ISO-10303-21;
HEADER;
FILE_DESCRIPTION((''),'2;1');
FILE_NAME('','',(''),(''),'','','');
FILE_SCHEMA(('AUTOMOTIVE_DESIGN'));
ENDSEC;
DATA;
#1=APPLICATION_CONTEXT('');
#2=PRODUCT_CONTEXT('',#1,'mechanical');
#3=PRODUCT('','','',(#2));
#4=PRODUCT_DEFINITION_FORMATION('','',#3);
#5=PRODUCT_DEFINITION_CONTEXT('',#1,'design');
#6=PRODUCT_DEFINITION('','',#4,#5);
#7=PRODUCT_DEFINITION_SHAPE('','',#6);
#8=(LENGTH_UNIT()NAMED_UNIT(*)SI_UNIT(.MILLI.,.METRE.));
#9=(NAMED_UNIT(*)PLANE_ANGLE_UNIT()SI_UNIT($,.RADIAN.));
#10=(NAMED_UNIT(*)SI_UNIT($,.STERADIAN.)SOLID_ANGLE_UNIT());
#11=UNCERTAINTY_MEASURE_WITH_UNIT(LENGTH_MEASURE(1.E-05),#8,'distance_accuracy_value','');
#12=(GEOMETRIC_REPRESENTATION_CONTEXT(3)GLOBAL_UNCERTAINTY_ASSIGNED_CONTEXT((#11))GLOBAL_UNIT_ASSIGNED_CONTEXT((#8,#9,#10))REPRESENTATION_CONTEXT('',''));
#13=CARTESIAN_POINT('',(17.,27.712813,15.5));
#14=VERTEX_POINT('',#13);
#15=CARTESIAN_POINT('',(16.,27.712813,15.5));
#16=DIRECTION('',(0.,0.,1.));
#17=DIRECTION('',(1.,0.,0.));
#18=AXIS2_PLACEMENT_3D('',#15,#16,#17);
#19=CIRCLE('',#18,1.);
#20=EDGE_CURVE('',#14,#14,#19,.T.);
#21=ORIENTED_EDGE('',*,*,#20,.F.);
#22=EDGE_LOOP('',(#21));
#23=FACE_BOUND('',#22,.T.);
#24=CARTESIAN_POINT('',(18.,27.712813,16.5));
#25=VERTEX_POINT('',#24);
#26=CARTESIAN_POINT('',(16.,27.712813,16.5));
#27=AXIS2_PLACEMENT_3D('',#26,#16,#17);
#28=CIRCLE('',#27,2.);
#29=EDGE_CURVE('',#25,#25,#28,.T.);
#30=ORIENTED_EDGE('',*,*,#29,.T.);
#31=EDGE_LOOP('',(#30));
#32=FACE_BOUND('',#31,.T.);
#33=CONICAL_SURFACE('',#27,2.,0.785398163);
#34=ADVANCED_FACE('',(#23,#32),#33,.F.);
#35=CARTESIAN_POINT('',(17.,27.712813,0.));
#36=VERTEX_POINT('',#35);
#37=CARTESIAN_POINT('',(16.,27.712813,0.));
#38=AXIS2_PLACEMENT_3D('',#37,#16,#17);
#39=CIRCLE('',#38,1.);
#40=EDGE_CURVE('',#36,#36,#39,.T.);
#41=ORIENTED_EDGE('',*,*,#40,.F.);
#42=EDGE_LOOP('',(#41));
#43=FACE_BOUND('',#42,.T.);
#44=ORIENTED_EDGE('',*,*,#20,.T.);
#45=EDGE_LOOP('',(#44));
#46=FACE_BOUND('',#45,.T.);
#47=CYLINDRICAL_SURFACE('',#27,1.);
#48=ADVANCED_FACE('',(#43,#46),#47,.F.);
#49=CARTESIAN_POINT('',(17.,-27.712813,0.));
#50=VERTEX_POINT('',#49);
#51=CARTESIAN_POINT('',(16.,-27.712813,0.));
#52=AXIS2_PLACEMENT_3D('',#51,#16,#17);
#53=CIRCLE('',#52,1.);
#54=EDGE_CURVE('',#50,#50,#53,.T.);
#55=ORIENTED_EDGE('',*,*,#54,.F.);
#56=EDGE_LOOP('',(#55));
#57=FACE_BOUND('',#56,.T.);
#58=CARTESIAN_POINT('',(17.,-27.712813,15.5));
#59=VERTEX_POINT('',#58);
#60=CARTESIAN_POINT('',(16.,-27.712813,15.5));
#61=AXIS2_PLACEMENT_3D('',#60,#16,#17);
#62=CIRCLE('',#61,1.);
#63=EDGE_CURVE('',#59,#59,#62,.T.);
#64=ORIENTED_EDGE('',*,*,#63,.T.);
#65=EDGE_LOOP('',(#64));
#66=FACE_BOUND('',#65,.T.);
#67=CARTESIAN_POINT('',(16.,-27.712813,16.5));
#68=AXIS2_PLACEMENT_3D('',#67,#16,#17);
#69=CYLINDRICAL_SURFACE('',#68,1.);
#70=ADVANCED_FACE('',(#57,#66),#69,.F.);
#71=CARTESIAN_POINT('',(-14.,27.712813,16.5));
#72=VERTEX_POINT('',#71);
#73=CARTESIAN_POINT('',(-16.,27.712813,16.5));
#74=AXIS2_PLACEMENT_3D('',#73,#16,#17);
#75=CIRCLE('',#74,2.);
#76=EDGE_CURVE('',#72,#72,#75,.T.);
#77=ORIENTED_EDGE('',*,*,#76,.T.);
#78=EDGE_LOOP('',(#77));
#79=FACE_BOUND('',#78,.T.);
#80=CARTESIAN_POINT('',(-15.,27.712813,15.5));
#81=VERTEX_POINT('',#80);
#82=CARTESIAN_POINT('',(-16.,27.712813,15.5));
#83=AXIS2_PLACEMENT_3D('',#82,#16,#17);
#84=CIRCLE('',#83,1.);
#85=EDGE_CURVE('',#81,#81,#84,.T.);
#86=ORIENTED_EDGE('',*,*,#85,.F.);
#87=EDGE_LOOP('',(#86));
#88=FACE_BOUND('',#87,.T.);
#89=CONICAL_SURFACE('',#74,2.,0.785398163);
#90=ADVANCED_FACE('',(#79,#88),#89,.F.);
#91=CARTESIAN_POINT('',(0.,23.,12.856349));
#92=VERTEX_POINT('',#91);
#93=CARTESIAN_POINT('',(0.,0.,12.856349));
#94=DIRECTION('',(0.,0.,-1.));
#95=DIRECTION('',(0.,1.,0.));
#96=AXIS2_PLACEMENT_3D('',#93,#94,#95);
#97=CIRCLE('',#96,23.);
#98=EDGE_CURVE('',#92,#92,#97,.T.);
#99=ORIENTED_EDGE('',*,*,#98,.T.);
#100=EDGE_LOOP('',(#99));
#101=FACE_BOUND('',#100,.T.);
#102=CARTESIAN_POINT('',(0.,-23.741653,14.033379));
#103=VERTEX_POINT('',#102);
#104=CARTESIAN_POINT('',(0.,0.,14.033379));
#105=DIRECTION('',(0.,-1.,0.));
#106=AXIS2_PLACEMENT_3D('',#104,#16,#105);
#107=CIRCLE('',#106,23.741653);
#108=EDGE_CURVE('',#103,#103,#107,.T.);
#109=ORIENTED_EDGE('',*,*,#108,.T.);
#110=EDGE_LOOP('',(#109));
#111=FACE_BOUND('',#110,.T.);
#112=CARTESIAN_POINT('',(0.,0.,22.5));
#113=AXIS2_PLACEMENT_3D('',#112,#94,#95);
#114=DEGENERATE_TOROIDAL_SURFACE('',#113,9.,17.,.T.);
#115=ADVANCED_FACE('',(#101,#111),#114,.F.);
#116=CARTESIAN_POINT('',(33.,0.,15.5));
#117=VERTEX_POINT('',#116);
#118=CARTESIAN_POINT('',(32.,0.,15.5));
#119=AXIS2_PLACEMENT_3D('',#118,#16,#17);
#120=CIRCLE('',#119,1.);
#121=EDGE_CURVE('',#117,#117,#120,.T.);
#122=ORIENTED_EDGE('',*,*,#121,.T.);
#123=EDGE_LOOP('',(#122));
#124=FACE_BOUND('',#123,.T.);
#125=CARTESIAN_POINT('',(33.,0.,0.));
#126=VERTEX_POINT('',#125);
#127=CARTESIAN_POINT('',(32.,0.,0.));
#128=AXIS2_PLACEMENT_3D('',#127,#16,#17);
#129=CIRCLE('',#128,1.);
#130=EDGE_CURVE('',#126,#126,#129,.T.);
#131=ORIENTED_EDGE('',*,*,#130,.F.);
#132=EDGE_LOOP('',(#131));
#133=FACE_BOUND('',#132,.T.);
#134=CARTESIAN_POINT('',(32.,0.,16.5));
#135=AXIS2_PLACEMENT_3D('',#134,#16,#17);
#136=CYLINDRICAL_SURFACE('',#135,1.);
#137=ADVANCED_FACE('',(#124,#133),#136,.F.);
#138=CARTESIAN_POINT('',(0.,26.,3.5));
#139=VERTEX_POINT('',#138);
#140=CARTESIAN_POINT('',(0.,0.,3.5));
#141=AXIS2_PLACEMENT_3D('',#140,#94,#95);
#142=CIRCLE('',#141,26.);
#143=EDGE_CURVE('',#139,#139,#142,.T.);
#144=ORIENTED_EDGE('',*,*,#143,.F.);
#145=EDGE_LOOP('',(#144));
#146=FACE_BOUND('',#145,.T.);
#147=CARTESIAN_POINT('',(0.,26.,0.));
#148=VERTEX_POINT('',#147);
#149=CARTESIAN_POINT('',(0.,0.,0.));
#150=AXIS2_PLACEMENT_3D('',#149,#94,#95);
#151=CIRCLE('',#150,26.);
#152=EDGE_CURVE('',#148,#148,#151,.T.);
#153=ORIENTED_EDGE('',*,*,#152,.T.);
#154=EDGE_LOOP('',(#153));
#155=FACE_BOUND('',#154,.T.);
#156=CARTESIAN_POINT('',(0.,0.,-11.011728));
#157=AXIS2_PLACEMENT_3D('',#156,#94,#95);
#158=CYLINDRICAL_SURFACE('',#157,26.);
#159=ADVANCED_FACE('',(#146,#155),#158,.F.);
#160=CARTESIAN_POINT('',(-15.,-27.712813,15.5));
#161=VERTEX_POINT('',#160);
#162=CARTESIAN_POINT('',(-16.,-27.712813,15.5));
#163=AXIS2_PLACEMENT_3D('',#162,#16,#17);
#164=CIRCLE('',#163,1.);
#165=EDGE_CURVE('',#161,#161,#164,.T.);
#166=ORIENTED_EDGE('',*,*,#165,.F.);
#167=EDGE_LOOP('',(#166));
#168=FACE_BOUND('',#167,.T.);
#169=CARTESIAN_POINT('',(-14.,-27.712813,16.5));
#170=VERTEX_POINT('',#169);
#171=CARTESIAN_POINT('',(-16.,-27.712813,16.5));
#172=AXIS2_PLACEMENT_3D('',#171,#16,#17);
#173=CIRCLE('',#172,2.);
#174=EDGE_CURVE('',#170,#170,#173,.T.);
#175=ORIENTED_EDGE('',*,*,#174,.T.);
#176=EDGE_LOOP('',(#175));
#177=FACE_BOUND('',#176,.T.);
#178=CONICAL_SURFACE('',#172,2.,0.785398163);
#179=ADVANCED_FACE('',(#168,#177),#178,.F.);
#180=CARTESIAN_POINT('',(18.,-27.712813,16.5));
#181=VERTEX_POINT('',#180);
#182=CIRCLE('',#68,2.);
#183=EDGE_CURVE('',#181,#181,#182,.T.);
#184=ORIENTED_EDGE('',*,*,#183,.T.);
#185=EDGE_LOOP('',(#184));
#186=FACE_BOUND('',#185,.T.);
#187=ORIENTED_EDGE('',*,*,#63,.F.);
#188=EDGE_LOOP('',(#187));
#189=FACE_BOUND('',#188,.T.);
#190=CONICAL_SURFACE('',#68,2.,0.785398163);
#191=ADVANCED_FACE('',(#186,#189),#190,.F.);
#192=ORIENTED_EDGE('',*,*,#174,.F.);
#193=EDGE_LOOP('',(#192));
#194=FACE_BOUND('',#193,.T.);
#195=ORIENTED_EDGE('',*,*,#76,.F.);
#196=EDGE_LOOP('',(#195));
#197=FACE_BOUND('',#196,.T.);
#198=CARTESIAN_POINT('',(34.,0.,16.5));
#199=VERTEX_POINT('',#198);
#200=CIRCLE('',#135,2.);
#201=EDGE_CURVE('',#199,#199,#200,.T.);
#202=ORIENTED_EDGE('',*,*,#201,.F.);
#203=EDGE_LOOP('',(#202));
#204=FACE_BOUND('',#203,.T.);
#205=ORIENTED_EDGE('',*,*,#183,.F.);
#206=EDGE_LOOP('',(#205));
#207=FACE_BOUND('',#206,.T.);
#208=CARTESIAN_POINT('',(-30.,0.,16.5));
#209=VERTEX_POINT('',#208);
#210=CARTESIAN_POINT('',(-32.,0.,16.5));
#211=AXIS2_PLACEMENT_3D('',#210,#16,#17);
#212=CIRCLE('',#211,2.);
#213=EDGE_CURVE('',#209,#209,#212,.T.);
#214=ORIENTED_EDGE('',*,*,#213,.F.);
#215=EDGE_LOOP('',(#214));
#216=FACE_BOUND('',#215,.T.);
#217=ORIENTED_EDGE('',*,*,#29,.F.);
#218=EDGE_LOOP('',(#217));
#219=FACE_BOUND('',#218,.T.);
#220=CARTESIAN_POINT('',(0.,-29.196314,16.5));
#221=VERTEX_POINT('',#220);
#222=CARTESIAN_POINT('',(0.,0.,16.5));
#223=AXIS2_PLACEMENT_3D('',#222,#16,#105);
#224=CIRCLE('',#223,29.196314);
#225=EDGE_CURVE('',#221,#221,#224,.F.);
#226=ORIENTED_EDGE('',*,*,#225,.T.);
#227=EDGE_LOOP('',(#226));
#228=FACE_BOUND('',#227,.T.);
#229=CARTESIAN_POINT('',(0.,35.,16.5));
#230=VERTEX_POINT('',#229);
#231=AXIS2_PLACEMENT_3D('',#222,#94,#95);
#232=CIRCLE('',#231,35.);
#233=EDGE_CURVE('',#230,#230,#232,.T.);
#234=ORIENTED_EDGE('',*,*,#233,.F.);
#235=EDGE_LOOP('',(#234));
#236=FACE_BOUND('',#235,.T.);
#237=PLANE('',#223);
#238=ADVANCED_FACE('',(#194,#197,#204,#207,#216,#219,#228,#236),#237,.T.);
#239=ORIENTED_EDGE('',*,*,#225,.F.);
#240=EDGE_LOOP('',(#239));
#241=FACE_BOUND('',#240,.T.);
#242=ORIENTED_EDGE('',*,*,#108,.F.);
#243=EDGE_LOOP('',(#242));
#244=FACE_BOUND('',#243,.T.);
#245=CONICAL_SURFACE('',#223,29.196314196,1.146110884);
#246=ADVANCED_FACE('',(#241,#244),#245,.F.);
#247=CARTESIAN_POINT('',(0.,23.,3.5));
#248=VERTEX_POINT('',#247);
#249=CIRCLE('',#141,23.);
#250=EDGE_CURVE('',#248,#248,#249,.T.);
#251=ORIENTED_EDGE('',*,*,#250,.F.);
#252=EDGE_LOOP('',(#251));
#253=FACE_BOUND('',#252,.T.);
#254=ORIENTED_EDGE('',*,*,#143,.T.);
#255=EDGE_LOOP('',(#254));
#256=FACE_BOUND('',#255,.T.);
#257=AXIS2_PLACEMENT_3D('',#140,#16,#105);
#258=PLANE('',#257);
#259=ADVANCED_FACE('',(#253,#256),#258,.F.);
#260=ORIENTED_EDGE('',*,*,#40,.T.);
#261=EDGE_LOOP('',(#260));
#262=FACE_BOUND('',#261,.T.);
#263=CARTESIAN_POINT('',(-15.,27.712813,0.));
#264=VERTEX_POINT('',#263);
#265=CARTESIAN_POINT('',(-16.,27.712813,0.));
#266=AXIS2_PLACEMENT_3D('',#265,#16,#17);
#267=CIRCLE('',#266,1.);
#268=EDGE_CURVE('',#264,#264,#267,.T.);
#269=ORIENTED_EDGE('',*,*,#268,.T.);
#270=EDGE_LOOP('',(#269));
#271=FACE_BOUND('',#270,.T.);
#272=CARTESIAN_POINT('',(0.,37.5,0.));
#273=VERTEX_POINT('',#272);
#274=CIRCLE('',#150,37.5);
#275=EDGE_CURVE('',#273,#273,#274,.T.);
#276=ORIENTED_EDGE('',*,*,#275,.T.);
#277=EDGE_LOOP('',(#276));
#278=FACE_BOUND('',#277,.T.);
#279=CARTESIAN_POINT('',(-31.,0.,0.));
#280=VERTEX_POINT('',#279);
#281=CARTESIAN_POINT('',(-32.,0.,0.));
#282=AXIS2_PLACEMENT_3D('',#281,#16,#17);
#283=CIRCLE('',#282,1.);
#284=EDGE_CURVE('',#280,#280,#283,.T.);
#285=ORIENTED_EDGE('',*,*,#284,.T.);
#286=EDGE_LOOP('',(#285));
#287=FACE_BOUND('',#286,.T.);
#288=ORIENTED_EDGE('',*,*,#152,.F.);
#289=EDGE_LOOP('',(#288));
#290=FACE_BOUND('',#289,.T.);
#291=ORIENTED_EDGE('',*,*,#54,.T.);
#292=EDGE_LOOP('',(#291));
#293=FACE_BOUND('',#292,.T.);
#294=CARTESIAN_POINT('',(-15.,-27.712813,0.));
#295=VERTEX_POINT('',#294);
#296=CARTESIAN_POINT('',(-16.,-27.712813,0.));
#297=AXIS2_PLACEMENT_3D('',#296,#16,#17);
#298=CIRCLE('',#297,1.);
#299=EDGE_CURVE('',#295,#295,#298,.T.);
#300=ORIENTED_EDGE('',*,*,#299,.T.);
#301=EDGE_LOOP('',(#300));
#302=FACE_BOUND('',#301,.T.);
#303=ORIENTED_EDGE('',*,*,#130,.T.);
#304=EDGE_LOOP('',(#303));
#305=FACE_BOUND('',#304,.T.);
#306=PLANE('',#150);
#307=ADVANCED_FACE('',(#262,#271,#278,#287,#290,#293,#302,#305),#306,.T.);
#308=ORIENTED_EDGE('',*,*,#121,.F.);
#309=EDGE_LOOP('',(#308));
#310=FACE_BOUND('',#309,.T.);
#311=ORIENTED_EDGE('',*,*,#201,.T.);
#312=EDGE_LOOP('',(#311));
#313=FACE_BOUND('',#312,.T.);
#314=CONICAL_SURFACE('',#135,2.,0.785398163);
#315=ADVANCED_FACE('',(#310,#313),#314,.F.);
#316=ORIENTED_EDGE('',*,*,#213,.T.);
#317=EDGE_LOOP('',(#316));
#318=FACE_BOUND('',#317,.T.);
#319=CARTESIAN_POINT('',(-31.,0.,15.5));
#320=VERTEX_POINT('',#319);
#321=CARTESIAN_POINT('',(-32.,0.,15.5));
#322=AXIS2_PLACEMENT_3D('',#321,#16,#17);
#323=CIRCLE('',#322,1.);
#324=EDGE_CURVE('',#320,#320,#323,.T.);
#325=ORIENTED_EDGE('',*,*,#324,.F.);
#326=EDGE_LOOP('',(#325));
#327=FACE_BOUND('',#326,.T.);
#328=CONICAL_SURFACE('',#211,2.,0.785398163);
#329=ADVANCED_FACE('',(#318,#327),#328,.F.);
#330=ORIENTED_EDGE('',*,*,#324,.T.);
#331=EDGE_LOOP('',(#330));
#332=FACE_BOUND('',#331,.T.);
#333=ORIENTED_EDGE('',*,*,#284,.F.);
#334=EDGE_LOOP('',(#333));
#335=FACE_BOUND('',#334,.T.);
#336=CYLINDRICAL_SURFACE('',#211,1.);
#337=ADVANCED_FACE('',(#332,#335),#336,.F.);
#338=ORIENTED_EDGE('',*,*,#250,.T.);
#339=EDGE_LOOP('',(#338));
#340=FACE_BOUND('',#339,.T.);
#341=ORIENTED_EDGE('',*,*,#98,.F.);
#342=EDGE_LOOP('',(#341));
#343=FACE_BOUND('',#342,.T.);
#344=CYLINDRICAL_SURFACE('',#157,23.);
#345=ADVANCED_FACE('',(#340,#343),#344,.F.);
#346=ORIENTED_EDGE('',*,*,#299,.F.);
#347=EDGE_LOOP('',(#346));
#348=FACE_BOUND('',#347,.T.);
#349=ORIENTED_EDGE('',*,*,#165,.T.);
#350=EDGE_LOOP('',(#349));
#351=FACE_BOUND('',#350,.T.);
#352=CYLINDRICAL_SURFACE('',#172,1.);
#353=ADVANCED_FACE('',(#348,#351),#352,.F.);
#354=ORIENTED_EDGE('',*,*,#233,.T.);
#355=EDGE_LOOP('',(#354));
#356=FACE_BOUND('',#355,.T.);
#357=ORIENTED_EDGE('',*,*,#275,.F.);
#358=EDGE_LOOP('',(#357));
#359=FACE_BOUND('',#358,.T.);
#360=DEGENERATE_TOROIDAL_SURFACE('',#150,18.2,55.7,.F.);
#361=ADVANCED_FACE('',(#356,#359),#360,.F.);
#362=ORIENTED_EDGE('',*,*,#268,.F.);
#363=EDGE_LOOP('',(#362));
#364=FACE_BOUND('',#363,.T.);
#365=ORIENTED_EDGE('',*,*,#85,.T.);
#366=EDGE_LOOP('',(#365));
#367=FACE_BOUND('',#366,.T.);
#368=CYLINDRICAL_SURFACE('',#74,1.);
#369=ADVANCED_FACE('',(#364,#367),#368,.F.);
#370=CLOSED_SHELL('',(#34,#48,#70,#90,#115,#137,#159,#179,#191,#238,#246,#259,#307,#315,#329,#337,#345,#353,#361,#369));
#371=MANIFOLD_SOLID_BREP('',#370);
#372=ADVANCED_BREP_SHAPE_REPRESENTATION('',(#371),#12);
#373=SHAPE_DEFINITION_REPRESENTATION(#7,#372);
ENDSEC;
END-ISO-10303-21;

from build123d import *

# Parameters (mm, degrees)
FASE1_SIZE             = 4.290340475
M2_SENKUNG_D           = 2
M2_SENKUNG_CSINK_D     = 4
M2_SENKUNG_CSINK_ANGLE = 90


with BuildPart() as part:
    # Skizze1 → Rotation (revolve)
    with BuildSketch(Plane(origin=(0, 0, 0), x_dir=(0, 0, -1), z_dir=(1, 0, 0))):
        with BuildLine():
            Line((0, 26), (0, 37.5))
            ThreePointArc((0, 37.5), (-8.344159634, 36.871453585), (-16.5, 35))
            Line((-16.5, 35), (-16.5, 24.905973721))
            ThreePointArc((-16.5, 24.905973721), (-14.620334002, 24.063560793), (-12.856349239, 23))
            Line((-12.856349239, 23), (-3.5, 23))
            Line((-3.5, 23), (-3.5, 26))
            Line((-3.5, 26), (0, 26))
        make_face()
    revolve(axis=Axis((0, 0, -11.01172812), (0, 0, 1)))

    # Fase1
    # the kernel refuses this chamfer: 4.290340475, 2.5 mm, written as the material it takes off along each edge
    with BuildSketch(Plane(origin=(0, 0, 16.5), x_dir=(0, 1, 0), z_dir=(1, 0, 0))) as fase1_piece_1:
        with BuildLine():
            Line((24.905973721 + FASE1_SIZE, 0), (23.741652955, -2.466620822))
            ThreePointArc((23.741652955, -2.466620822), (24.345172312, -1.316125117), (24.905973721, 0))
            Line((24.905973721, 0), (24.905973721 + FASE1_SIZE, 0))
        make_face()
    revolve(axis=Axis((0, 0, 16.5), (0, 0, 1)), mode=Mode.SUBTRACT)

    # M2 Senkung (through all)
    with Locations(Plane.XY.offset(16.5)):
        with Locations((-16, 27.712812921), (16, 27.712812921), (32, 0), (16, -27.712812921), (-16, -27.712812921), (-32, 0)):
            CounterSinkHole(M2_SENKUNG_D / 2, M2_SENKUNG_CSINK_D / 2, counter_sink_angle=M2_SENKUNG_CSINK_ANGLE)


solid = part.part
